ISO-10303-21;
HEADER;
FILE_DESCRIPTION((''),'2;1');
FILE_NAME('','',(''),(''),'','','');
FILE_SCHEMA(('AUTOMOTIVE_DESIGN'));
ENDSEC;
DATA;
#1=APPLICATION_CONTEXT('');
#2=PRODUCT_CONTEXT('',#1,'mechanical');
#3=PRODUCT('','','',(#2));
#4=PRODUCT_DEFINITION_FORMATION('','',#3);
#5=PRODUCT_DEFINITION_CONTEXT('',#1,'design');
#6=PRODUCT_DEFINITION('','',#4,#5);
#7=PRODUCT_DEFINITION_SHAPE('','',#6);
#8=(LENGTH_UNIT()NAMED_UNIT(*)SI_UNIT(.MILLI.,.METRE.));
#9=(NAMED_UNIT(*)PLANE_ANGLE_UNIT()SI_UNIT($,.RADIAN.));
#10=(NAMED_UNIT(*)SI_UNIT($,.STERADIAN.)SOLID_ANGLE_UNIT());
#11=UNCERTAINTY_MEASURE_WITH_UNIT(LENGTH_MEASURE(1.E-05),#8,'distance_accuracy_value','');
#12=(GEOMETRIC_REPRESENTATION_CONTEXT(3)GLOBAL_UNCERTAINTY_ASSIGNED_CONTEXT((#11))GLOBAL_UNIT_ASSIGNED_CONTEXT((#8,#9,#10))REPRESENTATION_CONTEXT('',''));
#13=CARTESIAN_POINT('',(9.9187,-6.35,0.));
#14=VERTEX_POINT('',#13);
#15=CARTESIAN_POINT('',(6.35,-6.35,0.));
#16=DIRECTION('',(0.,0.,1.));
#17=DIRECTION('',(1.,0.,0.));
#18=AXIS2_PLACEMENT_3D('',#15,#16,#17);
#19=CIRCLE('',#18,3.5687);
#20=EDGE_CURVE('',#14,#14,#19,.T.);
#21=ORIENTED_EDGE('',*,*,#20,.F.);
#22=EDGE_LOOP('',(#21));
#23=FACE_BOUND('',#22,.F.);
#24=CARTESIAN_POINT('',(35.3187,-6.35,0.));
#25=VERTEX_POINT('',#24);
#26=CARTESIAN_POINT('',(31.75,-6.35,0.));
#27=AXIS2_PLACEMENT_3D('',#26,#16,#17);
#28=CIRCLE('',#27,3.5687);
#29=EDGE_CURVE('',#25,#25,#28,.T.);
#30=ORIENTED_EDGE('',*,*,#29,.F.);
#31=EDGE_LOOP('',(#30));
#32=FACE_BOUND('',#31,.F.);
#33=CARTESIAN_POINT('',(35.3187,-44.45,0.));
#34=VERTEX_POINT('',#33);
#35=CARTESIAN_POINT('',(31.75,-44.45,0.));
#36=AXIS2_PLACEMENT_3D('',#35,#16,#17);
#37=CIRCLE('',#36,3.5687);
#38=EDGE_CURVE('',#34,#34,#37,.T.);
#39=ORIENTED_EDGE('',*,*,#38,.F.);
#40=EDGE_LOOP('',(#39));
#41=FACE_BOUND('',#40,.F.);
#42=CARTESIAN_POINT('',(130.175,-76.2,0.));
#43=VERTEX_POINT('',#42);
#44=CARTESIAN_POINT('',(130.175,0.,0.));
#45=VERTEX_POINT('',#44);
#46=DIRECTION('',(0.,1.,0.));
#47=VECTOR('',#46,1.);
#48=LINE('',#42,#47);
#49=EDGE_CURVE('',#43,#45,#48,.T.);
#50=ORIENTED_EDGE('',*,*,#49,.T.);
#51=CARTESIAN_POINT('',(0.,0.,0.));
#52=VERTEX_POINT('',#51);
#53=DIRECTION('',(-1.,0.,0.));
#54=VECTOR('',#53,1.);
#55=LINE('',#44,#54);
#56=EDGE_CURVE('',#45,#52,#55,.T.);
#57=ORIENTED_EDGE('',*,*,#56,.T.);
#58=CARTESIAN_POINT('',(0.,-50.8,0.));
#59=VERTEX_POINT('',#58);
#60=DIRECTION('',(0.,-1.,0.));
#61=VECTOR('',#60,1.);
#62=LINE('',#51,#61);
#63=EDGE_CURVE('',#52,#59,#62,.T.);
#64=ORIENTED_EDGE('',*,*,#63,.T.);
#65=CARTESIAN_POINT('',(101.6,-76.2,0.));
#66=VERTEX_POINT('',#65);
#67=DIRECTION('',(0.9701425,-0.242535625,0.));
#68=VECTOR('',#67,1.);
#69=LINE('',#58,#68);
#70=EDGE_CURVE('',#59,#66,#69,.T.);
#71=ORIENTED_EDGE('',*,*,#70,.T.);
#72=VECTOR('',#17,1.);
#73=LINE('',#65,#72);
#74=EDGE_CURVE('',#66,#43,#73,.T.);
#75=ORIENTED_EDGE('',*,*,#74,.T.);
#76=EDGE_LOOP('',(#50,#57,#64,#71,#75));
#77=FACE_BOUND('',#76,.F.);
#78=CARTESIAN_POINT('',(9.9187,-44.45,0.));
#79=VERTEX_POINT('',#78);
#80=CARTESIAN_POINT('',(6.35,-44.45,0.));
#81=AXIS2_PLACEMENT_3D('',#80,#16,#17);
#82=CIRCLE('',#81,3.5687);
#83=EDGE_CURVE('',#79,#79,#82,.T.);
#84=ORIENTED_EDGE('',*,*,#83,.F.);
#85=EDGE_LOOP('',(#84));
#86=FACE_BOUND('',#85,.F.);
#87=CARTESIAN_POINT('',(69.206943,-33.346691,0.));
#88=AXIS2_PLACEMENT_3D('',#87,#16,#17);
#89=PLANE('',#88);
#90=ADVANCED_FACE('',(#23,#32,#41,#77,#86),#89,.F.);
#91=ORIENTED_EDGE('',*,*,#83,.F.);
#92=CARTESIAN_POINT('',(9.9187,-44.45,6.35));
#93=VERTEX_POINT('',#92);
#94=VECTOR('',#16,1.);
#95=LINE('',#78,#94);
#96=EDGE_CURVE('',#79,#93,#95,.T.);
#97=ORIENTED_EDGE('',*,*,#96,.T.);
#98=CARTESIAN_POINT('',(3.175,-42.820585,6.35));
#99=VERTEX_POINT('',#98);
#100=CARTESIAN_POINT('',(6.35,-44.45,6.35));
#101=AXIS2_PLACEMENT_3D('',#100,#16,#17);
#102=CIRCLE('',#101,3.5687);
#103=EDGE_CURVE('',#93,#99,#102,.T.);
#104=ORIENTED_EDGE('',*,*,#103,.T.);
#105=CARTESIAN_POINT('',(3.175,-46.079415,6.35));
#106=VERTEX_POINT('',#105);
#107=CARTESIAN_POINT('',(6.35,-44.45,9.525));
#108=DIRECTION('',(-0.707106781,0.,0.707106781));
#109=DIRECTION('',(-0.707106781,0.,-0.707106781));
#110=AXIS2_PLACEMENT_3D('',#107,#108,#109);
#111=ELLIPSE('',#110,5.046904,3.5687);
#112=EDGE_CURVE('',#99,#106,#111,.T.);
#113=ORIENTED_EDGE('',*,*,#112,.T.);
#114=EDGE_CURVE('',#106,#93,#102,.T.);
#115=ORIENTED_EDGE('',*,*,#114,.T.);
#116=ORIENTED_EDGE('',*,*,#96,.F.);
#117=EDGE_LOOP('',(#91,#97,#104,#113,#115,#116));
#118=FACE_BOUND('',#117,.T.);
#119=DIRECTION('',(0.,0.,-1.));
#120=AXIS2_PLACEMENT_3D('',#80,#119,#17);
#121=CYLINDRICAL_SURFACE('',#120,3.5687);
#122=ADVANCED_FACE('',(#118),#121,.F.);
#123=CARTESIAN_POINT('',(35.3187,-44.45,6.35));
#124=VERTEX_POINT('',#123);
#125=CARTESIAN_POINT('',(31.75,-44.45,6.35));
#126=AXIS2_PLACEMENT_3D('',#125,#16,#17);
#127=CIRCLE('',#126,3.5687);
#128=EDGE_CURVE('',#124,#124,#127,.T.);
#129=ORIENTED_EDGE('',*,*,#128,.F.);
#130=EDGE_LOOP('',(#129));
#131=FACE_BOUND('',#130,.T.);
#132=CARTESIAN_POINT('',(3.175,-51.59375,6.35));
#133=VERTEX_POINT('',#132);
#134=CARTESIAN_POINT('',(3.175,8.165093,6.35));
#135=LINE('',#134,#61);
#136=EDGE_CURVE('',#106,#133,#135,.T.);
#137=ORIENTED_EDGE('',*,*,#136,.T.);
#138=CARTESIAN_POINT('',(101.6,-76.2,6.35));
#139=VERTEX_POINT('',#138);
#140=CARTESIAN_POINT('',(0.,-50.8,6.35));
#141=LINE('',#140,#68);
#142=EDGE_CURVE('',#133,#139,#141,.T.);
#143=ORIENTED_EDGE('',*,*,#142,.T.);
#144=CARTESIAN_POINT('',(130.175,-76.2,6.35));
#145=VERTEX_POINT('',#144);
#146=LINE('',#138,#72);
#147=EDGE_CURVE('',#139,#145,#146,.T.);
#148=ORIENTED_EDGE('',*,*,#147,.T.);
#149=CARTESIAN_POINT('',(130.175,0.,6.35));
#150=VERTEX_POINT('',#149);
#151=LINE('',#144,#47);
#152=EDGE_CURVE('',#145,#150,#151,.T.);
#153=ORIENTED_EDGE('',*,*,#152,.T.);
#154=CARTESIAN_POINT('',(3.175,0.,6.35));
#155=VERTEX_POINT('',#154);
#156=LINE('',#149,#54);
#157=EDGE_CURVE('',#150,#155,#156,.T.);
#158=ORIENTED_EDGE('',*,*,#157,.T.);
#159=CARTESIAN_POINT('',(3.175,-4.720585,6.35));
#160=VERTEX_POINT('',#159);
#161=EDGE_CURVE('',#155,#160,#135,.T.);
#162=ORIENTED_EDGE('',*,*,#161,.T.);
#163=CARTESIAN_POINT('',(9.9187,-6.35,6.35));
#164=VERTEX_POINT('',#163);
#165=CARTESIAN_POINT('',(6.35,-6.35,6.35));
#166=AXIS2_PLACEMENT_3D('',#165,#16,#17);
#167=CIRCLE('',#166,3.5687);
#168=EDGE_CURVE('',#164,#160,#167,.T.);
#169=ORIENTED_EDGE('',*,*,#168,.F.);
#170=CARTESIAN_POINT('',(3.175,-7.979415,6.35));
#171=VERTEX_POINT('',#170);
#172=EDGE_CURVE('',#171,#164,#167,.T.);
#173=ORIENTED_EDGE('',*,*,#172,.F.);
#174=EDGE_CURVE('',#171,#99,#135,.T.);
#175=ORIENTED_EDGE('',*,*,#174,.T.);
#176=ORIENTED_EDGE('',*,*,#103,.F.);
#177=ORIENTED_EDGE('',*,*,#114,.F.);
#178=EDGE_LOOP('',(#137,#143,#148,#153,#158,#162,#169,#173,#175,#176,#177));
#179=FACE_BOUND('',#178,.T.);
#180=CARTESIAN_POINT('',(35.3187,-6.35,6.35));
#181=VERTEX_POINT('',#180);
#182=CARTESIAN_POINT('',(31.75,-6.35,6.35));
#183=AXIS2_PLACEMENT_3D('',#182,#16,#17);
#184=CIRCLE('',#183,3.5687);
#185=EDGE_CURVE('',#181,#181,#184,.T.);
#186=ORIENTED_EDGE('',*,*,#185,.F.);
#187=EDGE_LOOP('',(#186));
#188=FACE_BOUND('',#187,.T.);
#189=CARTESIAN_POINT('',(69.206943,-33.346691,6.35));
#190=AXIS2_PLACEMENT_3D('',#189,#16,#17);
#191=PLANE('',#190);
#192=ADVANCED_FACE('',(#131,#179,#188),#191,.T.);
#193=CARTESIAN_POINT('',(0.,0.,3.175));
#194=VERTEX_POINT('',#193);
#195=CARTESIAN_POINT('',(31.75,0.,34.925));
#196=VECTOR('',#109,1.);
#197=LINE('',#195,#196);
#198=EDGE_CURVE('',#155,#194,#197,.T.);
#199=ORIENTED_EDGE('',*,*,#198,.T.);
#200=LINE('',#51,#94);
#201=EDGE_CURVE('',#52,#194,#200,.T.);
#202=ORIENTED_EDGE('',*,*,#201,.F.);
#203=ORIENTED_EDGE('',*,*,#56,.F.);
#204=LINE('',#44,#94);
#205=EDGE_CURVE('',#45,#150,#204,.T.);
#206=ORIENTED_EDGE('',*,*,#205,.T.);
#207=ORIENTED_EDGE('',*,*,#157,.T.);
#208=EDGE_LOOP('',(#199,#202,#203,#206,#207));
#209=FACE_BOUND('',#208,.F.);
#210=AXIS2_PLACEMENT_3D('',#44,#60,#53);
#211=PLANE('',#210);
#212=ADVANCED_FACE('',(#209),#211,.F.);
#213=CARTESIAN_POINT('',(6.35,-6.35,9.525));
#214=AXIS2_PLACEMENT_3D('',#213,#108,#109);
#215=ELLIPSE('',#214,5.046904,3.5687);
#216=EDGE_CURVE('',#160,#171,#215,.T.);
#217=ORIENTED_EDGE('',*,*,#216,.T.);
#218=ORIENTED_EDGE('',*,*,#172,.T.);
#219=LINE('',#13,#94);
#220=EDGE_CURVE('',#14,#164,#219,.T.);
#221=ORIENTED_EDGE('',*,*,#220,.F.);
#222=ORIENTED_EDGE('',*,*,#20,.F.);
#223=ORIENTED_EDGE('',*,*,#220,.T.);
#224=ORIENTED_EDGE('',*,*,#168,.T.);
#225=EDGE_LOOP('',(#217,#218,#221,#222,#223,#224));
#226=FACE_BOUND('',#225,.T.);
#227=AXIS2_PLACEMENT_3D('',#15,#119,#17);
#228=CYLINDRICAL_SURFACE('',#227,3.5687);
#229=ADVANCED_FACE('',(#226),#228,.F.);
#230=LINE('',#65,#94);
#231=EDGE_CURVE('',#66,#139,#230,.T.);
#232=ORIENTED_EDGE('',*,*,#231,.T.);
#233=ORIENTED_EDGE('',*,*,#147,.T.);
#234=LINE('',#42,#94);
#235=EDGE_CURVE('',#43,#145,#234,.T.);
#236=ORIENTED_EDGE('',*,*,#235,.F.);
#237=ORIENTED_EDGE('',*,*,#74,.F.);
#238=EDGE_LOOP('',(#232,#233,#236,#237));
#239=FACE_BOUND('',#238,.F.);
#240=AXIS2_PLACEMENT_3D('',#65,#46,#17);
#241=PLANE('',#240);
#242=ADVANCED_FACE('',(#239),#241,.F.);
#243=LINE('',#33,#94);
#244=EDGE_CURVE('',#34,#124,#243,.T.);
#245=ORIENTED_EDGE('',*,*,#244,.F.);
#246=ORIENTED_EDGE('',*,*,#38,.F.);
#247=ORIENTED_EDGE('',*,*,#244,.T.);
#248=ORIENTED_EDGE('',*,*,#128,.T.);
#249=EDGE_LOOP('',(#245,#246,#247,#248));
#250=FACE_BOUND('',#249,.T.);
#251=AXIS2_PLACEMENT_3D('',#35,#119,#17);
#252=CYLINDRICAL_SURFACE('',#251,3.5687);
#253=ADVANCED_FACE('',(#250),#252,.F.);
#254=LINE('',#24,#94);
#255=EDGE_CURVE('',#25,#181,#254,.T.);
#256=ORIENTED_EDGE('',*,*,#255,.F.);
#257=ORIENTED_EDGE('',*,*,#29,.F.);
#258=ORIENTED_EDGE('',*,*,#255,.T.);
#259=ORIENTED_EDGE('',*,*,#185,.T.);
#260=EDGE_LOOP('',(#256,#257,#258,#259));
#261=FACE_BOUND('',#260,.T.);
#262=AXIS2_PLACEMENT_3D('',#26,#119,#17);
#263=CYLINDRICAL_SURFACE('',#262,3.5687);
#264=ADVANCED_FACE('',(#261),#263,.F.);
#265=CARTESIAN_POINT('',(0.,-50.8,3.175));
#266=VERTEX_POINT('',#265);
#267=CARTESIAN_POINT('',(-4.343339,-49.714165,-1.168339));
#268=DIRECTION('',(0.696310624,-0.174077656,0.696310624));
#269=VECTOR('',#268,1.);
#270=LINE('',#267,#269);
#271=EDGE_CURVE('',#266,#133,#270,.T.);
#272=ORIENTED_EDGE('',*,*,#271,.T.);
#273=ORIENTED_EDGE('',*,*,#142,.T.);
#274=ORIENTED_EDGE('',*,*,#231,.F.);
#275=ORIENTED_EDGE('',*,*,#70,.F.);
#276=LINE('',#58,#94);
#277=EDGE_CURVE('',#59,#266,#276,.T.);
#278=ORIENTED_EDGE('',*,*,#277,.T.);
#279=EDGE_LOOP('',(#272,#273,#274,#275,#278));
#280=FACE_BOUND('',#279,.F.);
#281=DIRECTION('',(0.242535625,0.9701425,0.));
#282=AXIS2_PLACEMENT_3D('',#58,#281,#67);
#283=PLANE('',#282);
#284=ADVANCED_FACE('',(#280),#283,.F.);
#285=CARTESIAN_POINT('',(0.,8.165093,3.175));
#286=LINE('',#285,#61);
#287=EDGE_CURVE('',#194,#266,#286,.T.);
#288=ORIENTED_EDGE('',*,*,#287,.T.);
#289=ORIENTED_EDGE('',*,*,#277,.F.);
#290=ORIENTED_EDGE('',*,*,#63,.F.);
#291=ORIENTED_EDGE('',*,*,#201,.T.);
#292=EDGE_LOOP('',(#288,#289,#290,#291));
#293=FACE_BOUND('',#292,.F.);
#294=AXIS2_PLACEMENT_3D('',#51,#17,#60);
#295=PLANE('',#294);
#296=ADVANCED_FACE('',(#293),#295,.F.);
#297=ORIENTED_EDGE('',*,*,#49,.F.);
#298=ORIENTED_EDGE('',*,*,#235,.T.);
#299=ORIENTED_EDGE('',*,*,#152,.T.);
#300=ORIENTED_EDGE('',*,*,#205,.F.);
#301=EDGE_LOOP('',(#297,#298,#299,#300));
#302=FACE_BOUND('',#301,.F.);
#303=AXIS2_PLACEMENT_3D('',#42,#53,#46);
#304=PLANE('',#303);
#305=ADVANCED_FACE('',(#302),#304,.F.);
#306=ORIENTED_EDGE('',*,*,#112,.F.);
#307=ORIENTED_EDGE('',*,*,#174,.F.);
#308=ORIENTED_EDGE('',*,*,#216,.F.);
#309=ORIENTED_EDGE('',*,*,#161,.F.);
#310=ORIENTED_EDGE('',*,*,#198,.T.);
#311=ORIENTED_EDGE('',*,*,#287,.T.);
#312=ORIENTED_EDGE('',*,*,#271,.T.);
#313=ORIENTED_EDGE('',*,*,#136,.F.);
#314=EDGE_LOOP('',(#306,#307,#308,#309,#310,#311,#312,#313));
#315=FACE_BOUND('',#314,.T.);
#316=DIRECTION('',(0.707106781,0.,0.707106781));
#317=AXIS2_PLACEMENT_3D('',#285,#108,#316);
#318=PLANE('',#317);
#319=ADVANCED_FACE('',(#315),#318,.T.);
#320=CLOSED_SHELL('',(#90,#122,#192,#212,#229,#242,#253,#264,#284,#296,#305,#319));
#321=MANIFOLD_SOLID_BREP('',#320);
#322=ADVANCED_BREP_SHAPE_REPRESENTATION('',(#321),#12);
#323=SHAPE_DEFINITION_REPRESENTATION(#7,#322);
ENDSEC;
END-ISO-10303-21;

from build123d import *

# Parameters (mm, degrees)
F0_R        = 3.5687
F1_DEPTH    = 6.35
F2_T1_DEPTH = 67.1301869736


# Not quite as in the source:
# - a fillet or chamfer that OpenCascade refuses, or shapes differently, is made with other operations: its cross-section is extruded or revolved along the edge and cut away or added


with BuildPart() as f1:
    # F0 (on Top) → F1 (new body)
    with BuildSketch(Plane.XY):
        Polygon((130.175, 0), (0, 0), (0, -50.8), (101.6, -76.2), (130.175, -76.2), align=None)
        with Locations((6.35, -44.45)):
            Circle(F0_R, mode=Mode.SUBTRACT)
        with Locations((31.75, -44.45)):
            Circle(F0_R, mode=Mode.SUBTRACT)
        with Locations((6.35, -6.35)):
            Circle(F0_R, mode=Mode.SUBTRACT)
        with Locations((31.75, -6.35)):
            Circle(F0_R, mode=Mode.SUBTRACT)
    extrude(amount=F1_DEPTH)

    # F2: chamfer of 3.175 on 1 edges, made by hand

    # F2_s2 → F2_t1 (cut)
    with BuildSketch(Plane.XZ.offset(-8.1650934868)):
        Polygon((0, 3.175), (3.175, 6.35), (0, 6.35), align=None)
    extrude(amount=F2_T1_DEPTH, mode=Mode.SUBTRACT)


solid = f1.part
